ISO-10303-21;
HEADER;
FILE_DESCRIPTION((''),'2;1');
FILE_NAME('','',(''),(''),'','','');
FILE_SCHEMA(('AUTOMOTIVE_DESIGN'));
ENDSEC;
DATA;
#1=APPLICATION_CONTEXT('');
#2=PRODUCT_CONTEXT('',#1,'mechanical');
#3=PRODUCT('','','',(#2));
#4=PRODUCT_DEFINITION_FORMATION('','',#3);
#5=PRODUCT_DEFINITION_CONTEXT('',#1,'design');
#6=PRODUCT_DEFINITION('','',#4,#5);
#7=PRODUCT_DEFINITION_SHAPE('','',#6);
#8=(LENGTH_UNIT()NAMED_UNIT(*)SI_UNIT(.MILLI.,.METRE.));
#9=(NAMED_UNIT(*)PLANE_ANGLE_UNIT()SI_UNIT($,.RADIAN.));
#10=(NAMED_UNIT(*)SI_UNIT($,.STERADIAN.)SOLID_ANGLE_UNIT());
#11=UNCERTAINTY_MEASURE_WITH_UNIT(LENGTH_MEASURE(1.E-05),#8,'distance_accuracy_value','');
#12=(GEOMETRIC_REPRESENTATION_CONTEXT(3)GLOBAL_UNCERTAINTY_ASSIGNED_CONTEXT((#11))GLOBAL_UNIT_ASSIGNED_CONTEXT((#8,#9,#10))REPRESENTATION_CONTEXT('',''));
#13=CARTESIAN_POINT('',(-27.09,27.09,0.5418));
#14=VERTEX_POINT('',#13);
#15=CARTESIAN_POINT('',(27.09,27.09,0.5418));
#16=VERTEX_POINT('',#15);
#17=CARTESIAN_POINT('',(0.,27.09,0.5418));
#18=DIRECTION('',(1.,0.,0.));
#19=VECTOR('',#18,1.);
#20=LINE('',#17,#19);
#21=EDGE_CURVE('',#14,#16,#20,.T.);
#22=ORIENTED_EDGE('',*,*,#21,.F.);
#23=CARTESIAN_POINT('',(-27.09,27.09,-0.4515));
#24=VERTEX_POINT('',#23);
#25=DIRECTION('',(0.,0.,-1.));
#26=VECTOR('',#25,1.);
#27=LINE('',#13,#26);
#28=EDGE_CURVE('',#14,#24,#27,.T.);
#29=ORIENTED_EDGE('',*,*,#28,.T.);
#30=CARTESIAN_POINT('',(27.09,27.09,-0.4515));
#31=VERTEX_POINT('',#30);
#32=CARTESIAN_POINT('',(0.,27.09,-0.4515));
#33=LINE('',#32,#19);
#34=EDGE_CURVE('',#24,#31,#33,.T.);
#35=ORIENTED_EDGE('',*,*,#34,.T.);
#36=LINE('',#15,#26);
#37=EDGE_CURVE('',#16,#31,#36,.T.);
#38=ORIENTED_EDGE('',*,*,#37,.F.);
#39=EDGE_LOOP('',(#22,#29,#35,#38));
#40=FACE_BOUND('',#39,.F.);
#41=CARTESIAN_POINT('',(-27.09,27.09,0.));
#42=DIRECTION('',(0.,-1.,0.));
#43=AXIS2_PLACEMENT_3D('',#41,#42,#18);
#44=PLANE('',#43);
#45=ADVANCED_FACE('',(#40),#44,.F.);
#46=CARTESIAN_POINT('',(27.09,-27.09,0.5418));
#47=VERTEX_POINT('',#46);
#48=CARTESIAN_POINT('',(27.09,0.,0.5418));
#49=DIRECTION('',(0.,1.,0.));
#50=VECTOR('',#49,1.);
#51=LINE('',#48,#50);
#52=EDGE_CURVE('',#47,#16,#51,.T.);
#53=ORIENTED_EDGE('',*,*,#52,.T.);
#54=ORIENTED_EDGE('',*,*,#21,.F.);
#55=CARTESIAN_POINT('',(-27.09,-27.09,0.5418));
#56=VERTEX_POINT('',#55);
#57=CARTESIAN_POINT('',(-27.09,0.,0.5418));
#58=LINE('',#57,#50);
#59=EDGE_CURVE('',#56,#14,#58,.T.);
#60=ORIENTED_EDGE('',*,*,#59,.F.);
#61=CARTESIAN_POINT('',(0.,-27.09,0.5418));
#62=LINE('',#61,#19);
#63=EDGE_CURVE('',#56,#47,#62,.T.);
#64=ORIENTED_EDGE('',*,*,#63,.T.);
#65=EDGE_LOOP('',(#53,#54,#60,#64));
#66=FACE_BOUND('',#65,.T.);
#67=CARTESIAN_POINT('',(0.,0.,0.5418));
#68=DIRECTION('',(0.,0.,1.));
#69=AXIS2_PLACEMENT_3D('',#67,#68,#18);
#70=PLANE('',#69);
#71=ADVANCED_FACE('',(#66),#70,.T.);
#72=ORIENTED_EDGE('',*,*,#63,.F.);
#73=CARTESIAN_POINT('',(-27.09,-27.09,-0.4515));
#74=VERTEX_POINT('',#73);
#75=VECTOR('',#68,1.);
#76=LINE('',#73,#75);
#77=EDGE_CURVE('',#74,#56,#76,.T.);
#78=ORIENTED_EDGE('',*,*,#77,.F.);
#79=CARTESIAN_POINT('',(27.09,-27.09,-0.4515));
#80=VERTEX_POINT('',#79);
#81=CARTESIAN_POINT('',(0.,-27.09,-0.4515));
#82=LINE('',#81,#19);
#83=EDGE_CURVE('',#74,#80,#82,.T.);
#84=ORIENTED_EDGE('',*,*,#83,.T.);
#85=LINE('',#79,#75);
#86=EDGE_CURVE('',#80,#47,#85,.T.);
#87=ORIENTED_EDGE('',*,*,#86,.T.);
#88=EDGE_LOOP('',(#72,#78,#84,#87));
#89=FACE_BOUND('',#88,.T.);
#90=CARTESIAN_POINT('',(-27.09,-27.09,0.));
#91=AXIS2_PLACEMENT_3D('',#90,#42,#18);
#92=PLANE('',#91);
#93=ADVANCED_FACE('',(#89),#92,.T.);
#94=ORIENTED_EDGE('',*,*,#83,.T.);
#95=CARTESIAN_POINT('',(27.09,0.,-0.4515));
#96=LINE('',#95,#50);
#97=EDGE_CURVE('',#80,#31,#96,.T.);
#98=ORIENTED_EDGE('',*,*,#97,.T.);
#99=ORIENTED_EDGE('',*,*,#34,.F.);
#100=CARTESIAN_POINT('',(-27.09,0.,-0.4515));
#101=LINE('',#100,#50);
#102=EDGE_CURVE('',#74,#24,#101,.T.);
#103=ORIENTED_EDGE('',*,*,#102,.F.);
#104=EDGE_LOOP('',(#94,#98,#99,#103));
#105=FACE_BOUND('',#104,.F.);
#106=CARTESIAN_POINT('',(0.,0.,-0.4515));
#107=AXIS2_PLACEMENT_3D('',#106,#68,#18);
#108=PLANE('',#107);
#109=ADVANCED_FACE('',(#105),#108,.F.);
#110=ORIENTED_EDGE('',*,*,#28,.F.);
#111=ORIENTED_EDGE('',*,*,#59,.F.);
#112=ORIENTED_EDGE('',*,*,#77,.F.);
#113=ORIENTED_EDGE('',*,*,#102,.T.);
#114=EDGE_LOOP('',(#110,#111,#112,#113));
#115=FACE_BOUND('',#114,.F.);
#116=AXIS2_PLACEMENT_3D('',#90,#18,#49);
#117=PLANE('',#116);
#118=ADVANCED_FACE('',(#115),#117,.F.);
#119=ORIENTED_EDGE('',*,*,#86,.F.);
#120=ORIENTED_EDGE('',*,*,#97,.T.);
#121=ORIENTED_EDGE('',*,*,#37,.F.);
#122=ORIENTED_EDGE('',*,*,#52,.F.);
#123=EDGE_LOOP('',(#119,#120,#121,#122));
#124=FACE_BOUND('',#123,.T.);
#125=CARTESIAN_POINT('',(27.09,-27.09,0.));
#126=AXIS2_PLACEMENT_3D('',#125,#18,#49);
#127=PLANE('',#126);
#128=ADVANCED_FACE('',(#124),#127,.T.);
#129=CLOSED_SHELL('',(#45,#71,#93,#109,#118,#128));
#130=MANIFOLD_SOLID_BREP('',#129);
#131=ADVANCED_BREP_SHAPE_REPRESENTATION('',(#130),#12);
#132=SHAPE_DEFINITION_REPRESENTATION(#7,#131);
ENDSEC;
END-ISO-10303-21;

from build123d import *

# Parameters (mm, degrees)
F0_W     = 6
F0_H     = 6
F1_DEPTH = 0.06
F2_SCALE = 10
F5_START = -2
F4_W     = 60
F4_H     = 60
F5_DEPTH = 0.5
F6_SCALE = 0.903


# Not quite as in the source:
# - a feature names something its author has since deleted; it is built from what else it names


with BuildPart() as f1:
    # F0 (on Top) → F1 (new body)
    with BuildSketch(Plane.XY):
        Rectangle(F0_W, F0_H)
    extrude(amount=F1_DEPTH)


with BuildPart() as f1_1:
    # F2: moved
    add(f1.part.scale(F2_SCALE))

    # F4 (on offset) → F5 (join)
    with BuildSketch(Plane.XY.offset(2).offset(F5_START)):
        Rectangle(F4_W, F4_H)
    extrude(amount=-F5_DEPTH)


with BuildPart() as f1_2:
    # F6: moved
    add(f1_1.part.scale(F6_SCALE))


solid = f1_2.part
